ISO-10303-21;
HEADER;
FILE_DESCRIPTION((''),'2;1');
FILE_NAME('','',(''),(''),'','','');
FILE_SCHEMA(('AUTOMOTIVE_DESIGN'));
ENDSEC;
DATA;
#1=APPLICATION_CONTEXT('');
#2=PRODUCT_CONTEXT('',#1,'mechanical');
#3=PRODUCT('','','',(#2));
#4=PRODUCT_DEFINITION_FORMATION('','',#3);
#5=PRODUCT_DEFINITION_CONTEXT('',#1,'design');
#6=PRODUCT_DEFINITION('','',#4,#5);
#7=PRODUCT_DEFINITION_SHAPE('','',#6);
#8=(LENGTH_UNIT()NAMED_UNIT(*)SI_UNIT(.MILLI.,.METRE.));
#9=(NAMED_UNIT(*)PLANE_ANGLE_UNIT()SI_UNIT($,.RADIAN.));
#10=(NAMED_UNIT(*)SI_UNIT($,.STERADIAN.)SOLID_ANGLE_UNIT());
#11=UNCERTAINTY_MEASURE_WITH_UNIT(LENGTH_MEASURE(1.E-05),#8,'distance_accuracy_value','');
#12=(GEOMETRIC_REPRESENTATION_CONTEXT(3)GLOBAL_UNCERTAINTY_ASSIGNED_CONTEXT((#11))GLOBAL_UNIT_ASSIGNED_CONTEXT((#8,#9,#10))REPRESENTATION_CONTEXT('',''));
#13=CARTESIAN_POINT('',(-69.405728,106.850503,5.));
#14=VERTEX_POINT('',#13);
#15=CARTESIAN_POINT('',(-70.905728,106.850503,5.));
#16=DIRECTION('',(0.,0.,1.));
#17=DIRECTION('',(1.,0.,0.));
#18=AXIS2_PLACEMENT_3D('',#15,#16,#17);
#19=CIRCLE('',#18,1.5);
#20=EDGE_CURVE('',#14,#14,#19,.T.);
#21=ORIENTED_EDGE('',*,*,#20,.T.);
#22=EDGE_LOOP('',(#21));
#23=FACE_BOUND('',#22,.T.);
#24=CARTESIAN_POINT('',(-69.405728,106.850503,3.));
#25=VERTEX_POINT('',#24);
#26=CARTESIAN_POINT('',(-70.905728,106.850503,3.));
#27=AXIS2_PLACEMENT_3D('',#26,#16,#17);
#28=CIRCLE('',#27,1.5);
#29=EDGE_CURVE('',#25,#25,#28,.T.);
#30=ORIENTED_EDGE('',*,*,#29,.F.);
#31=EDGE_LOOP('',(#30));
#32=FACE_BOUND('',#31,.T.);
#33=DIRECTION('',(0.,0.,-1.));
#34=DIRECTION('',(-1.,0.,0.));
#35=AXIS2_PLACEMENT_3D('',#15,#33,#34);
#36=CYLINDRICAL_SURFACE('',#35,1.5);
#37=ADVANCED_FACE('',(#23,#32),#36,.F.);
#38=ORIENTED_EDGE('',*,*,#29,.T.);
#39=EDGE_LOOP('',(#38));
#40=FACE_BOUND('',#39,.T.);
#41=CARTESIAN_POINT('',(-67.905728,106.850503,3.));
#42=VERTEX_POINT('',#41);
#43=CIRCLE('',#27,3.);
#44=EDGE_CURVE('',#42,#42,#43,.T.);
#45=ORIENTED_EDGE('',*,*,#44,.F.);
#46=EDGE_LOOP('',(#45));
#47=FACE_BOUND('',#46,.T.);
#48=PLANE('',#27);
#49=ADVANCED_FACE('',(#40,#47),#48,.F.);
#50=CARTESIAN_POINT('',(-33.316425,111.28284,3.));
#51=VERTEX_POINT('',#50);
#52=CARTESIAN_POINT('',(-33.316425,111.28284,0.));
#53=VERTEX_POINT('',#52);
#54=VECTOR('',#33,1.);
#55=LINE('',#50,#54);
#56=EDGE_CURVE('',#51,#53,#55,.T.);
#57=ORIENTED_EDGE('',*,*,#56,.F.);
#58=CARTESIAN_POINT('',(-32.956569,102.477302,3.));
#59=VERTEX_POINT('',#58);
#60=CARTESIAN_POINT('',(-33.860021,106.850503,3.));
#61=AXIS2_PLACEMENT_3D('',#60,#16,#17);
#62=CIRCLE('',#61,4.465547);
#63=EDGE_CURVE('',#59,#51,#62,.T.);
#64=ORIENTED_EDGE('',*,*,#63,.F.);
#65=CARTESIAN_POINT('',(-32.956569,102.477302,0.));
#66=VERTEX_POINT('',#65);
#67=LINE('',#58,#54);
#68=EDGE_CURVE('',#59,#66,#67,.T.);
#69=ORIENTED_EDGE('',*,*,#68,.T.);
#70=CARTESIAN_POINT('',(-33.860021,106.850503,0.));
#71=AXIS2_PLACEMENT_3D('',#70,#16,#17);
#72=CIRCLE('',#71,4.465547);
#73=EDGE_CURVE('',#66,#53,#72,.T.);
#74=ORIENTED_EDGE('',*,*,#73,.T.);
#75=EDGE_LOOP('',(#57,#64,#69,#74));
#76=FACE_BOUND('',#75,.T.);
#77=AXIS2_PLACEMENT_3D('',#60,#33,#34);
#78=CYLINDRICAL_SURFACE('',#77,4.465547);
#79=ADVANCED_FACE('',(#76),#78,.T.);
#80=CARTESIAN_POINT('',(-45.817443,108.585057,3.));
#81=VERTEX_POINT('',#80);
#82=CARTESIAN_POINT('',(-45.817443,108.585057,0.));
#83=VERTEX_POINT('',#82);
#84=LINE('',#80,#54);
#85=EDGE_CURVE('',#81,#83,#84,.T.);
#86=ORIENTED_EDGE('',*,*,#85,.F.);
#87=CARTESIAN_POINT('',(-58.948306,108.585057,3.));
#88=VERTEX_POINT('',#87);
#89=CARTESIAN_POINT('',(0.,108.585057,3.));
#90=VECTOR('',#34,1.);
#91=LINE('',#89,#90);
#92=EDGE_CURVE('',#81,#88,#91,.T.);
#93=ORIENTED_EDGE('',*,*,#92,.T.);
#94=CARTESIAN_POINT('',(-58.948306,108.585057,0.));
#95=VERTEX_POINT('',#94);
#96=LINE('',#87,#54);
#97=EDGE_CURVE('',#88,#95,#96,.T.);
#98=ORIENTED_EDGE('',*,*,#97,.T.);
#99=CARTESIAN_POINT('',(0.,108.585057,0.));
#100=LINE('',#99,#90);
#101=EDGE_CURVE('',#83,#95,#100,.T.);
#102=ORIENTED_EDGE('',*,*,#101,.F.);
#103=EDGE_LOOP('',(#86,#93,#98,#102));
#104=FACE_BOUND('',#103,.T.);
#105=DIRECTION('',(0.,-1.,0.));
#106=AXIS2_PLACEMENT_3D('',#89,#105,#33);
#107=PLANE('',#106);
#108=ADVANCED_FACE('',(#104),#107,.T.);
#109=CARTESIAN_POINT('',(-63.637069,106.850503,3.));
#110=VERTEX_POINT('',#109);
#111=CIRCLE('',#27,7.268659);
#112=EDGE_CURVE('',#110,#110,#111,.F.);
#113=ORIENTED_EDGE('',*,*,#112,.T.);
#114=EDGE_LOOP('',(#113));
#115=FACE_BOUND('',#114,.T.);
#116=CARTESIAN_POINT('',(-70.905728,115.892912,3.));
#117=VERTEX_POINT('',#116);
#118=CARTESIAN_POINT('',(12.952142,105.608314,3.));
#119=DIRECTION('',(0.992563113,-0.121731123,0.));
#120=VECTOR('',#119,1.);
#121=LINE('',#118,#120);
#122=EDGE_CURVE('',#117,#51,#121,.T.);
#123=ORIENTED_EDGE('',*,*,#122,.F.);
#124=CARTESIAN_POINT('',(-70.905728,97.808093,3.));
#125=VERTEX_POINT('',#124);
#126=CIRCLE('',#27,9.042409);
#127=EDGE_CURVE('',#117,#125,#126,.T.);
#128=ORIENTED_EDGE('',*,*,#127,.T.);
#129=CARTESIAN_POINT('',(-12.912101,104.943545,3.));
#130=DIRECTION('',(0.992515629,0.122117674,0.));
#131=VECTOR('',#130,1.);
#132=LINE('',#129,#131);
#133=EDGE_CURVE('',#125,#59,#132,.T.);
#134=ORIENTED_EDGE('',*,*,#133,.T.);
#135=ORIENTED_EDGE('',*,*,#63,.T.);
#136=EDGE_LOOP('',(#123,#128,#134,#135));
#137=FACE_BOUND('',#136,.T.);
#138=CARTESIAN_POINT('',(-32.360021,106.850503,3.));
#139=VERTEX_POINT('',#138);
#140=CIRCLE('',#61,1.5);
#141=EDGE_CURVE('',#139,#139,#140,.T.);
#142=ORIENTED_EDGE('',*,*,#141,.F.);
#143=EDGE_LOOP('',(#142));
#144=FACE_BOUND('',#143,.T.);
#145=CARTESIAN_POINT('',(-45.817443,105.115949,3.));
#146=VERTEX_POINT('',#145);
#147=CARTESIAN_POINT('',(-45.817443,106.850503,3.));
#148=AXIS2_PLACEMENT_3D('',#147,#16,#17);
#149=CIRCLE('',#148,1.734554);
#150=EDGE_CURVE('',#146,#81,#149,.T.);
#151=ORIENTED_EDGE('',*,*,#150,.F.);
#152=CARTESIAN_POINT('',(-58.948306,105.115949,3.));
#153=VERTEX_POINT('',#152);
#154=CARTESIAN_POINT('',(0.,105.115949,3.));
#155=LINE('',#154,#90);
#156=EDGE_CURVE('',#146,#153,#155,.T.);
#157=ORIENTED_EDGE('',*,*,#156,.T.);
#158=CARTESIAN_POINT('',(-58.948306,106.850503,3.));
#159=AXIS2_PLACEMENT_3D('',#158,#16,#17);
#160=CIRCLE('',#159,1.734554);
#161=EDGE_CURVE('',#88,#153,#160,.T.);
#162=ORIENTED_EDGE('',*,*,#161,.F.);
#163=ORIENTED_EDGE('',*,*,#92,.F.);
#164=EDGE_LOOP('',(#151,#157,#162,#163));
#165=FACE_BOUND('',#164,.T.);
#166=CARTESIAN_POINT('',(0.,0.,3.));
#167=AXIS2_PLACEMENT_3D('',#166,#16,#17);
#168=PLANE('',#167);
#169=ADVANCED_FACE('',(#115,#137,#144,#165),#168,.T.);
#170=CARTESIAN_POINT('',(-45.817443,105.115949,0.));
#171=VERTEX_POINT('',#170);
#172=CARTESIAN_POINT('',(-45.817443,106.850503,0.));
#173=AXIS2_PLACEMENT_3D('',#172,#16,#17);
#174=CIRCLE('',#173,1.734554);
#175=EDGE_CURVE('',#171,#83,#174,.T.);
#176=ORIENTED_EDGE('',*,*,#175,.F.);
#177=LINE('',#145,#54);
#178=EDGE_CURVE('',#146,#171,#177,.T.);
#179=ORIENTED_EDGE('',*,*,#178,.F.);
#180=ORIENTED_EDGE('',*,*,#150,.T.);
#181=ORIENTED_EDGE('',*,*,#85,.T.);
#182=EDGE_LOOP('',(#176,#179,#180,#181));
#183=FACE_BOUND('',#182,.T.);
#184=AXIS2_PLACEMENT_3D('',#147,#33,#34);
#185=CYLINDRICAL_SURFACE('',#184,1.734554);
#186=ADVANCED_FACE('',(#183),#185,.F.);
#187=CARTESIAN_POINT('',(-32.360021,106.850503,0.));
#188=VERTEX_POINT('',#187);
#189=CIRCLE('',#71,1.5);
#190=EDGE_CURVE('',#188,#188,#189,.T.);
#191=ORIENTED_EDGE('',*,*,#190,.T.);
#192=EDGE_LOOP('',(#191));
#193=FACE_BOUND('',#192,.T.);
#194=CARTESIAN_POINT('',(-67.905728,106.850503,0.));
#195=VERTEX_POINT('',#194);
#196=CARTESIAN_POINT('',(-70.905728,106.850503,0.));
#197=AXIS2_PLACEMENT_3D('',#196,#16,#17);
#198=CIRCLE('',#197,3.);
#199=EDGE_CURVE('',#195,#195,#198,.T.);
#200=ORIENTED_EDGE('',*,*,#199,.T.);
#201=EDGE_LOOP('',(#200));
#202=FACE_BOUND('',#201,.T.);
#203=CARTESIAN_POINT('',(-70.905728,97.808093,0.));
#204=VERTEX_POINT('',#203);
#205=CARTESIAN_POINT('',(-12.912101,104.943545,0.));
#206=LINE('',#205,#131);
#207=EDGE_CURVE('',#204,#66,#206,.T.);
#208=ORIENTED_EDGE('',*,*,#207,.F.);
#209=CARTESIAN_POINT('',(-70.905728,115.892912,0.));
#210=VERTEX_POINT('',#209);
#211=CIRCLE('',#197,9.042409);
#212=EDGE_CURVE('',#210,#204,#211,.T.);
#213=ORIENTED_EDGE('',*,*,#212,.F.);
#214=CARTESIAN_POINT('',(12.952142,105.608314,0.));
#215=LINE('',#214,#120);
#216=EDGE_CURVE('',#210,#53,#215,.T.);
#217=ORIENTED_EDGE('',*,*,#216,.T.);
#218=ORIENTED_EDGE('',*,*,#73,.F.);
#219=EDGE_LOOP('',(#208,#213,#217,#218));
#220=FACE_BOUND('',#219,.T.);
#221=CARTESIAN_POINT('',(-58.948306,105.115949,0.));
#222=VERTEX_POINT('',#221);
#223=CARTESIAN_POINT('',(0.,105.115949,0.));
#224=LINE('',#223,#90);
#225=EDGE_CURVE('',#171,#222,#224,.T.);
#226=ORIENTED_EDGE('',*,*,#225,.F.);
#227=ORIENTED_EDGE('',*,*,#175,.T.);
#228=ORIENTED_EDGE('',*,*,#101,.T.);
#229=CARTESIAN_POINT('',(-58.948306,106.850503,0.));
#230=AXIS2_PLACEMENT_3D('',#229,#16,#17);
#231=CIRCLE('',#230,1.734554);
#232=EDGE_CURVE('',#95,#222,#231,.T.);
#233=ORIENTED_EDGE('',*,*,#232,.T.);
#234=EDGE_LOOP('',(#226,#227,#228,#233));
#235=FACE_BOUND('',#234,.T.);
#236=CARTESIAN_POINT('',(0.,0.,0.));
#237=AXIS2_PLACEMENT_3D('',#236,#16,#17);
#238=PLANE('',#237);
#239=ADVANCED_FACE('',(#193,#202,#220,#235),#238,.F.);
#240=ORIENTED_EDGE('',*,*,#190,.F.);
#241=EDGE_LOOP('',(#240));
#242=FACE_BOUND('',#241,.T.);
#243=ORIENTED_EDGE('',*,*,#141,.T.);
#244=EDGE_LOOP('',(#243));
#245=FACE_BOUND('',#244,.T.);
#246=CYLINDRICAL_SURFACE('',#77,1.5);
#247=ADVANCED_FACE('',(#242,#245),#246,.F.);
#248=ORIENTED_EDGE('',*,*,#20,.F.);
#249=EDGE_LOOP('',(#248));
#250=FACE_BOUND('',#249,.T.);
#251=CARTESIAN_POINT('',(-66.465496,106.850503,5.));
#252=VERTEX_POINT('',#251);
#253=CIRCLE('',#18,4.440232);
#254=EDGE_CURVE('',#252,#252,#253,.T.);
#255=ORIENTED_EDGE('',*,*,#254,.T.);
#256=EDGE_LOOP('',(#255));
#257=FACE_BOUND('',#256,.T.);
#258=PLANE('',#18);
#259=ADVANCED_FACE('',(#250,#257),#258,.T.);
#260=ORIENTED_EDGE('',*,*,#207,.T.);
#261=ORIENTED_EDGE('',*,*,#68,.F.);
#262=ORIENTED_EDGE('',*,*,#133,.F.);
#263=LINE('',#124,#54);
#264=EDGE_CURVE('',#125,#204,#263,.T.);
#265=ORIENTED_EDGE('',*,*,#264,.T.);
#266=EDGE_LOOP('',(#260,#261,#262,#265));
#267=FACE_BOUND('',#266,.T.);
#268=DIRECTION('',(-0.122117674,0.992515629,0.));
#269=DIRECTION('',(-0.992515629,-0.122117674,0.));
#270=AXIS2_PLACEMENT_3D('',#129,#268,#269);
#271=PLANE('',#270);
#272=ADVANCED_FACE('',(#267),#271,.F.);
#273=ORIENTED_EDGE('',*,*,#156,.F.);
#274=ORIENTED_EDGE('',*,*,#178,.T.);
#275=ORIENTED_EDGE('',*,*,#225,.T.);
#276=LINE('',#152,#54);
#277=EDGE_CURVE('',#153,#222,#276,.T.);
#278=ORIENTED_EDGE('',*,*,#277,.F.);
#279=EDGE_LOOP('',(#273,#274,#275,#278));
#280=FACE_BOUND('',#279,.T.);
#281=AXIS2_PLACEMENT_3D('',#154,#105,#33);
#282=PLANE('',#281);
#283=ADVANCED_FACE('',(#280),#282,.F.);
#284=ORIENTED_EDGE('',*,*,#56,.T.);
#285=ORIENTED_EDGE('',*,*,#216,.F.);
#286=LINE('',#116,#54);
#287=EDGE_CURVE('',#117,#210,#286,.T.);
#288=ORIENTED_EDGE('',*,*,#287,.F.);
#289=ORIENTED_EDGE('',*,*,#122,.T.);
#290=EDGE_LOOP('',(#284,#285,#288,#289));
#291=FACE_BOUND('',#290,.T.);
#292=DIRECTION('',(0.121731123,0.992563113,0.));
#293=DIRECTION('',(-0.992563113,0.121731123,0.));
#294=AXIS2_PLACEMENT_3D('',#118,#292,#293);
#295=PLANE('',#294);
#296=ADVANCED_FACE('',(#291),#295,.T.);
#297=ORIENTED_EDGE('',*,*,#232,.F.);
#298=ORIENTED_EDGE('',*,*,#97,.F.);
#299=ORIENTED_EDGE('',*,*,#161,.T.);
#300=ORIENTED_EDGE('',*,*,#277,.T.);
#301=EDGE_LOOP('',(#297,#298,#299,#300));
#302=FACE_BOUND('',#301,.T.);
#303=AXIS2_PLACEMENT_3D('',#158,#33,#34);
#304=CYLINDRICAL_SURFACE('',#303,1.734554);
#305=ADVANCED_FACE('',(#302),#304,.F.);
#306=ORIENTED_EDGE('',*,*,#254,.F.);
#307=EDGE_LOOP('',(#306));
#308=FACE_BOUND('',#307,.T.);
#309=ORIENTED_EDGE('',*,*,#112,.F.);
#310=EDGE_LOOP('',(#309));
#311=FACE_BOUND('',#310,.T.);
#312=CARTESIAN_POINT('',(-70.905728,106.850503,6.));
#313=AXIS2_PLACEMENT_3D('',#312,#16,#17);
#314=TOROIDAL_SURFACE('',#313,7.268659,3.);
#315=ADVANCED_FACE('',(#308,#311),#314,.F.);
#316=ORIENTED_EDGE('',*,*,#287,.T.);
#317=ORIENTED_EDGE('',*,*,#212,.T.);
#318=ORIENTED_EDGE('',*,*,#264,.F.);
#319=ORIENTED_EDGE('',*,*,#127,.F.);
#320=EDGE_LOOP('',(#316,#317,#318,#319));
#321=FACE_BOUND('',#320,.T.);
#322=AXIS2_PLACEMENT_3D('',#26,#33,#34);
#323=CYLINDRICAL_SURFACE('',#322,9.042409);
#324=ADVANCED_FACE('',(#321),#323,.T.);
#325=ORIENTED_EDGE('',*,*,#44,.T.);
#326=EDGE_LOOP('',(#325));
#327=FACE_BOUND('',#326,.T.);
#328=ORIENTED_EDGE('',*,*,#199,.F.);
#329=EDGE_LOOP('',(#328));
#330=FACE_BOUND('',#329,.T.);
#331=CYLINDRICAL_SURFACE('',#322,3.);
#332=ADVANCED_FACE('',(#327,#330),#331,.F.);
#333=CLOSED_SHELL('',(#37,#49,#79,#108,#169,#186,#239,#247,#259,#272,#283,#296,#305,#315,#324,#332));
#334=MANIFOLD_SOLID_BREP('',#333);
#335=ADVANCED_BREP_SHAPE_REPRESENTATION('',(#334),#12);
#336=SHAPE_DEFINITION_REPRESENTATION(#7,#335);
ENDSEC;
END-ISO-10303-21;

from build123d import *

# Parameters (mm, degrees)
SKETCH1_R           = 3
SKETCH1_R_2         = 1.5
BOSS_EXTRUDE1_DEPTH = 3
SKETCH2_R           = 4.440231585
SKETCH2_R_2         = 1.5
BOSS_EXTRUDE2_DEPTH = 2
FILLET1_R           = 3


with BuildPart() as part:
    # Sketch1 → Boss-Extrude1 (new body)
    with BuildSketch(Plane.XY):
        with BuildLine():
            Line((-33.316424849, 111.282839546), (-70.905727769, 115.89291218))
            ThreePointArc((-70.905727769, 115.89291218), (-79.948137164, 106.850502785), (-70.905727769, 97.808093391))
            Line((-70.905727769, 97.808093391), (-33.676430248, 102.388731808))
            Line((-33.676430248, 102.388731808), (-32.956569458, 102.477302429))
            ThreePointArc((-32.956569458, 102.477302429), (-29.398198623, 107.032843823), (-33.316424849, 111.282839546))
        make_face()
        with Locations((-70.905727769, 106.850502785)):
            Circle(SKETCH1_R, mode=Mode.SUBTRACT)
        with BuildLine():
            ThreePointArc((-45.817442834, 108.585056612), (-44.082889007, 106.850502785), (-45.817442834, 105.115948958))
            Line((-45.817442834, 105.115948958), (-58.948305776, 105.115948958))
            ThreePointArc((-58.948305776, 105.115948958), (-60.682859603, 106.850502785), (-58.948305776, 108.585056612))
            Line((-58.948305776, 108.585056613), (-45.817442834, 108.585056613))
        make_face(mode=Mode.SUBTRACT)
        with Locations((-33.860020841, 106.850502785)):
            Circle(SKETCH1_R_2, mode=Mode.SUBTRACT)
    extrude(amount=BOSS_EXTRUDE1_DEPTH)

    # Sketch2 → Boss-Extrude2 (add)
    with BuildSketch(Plane.XY.offset(3)):
        with Locations((-70.905727769, 106.850502785)):
            Circle(SKETCH2_R)
        with Locations((-70.905727769, 106.850502785)):
            Circle(SKETCH2_R_2, mode=Mode.SUBTRACT)
    extrude(amount=BOSS_EXTRUDE2_DEPTH)

    # Fillet1
    # the kernel refuses this fillet: 3 mm, written as the material it adds along each edge
    with BuildSketch(Plane(origin=(-70.905727769, 106.850502785, 3), x_dir=(1, 0, 0), z_dir=(0, -1, 0))) as fillet1_piece_1:
        with BuildLine():
            CenterArc((7.26865871, 3), FILLET1_R, 199.471220634, 70.528779366)
            Line((4.440231585, 2), (4.383663043, 1.98))
            ThreePointArc((4.383663043, 1.98), (4.380231585, 1), (4.380231585, 0))
            Line((4.380231585, 0), (4.440231585, -0.06))
            Line((4.440231585, -0.06), (7.26865871, -0.06))
            Line((7.26865871, -0.06), (7.26865871, 0))
        make_face()
    revolve(axis=Axis((-70.905727769, 106.850502785, 3), (0, 0, 1)))


solid = part.part
